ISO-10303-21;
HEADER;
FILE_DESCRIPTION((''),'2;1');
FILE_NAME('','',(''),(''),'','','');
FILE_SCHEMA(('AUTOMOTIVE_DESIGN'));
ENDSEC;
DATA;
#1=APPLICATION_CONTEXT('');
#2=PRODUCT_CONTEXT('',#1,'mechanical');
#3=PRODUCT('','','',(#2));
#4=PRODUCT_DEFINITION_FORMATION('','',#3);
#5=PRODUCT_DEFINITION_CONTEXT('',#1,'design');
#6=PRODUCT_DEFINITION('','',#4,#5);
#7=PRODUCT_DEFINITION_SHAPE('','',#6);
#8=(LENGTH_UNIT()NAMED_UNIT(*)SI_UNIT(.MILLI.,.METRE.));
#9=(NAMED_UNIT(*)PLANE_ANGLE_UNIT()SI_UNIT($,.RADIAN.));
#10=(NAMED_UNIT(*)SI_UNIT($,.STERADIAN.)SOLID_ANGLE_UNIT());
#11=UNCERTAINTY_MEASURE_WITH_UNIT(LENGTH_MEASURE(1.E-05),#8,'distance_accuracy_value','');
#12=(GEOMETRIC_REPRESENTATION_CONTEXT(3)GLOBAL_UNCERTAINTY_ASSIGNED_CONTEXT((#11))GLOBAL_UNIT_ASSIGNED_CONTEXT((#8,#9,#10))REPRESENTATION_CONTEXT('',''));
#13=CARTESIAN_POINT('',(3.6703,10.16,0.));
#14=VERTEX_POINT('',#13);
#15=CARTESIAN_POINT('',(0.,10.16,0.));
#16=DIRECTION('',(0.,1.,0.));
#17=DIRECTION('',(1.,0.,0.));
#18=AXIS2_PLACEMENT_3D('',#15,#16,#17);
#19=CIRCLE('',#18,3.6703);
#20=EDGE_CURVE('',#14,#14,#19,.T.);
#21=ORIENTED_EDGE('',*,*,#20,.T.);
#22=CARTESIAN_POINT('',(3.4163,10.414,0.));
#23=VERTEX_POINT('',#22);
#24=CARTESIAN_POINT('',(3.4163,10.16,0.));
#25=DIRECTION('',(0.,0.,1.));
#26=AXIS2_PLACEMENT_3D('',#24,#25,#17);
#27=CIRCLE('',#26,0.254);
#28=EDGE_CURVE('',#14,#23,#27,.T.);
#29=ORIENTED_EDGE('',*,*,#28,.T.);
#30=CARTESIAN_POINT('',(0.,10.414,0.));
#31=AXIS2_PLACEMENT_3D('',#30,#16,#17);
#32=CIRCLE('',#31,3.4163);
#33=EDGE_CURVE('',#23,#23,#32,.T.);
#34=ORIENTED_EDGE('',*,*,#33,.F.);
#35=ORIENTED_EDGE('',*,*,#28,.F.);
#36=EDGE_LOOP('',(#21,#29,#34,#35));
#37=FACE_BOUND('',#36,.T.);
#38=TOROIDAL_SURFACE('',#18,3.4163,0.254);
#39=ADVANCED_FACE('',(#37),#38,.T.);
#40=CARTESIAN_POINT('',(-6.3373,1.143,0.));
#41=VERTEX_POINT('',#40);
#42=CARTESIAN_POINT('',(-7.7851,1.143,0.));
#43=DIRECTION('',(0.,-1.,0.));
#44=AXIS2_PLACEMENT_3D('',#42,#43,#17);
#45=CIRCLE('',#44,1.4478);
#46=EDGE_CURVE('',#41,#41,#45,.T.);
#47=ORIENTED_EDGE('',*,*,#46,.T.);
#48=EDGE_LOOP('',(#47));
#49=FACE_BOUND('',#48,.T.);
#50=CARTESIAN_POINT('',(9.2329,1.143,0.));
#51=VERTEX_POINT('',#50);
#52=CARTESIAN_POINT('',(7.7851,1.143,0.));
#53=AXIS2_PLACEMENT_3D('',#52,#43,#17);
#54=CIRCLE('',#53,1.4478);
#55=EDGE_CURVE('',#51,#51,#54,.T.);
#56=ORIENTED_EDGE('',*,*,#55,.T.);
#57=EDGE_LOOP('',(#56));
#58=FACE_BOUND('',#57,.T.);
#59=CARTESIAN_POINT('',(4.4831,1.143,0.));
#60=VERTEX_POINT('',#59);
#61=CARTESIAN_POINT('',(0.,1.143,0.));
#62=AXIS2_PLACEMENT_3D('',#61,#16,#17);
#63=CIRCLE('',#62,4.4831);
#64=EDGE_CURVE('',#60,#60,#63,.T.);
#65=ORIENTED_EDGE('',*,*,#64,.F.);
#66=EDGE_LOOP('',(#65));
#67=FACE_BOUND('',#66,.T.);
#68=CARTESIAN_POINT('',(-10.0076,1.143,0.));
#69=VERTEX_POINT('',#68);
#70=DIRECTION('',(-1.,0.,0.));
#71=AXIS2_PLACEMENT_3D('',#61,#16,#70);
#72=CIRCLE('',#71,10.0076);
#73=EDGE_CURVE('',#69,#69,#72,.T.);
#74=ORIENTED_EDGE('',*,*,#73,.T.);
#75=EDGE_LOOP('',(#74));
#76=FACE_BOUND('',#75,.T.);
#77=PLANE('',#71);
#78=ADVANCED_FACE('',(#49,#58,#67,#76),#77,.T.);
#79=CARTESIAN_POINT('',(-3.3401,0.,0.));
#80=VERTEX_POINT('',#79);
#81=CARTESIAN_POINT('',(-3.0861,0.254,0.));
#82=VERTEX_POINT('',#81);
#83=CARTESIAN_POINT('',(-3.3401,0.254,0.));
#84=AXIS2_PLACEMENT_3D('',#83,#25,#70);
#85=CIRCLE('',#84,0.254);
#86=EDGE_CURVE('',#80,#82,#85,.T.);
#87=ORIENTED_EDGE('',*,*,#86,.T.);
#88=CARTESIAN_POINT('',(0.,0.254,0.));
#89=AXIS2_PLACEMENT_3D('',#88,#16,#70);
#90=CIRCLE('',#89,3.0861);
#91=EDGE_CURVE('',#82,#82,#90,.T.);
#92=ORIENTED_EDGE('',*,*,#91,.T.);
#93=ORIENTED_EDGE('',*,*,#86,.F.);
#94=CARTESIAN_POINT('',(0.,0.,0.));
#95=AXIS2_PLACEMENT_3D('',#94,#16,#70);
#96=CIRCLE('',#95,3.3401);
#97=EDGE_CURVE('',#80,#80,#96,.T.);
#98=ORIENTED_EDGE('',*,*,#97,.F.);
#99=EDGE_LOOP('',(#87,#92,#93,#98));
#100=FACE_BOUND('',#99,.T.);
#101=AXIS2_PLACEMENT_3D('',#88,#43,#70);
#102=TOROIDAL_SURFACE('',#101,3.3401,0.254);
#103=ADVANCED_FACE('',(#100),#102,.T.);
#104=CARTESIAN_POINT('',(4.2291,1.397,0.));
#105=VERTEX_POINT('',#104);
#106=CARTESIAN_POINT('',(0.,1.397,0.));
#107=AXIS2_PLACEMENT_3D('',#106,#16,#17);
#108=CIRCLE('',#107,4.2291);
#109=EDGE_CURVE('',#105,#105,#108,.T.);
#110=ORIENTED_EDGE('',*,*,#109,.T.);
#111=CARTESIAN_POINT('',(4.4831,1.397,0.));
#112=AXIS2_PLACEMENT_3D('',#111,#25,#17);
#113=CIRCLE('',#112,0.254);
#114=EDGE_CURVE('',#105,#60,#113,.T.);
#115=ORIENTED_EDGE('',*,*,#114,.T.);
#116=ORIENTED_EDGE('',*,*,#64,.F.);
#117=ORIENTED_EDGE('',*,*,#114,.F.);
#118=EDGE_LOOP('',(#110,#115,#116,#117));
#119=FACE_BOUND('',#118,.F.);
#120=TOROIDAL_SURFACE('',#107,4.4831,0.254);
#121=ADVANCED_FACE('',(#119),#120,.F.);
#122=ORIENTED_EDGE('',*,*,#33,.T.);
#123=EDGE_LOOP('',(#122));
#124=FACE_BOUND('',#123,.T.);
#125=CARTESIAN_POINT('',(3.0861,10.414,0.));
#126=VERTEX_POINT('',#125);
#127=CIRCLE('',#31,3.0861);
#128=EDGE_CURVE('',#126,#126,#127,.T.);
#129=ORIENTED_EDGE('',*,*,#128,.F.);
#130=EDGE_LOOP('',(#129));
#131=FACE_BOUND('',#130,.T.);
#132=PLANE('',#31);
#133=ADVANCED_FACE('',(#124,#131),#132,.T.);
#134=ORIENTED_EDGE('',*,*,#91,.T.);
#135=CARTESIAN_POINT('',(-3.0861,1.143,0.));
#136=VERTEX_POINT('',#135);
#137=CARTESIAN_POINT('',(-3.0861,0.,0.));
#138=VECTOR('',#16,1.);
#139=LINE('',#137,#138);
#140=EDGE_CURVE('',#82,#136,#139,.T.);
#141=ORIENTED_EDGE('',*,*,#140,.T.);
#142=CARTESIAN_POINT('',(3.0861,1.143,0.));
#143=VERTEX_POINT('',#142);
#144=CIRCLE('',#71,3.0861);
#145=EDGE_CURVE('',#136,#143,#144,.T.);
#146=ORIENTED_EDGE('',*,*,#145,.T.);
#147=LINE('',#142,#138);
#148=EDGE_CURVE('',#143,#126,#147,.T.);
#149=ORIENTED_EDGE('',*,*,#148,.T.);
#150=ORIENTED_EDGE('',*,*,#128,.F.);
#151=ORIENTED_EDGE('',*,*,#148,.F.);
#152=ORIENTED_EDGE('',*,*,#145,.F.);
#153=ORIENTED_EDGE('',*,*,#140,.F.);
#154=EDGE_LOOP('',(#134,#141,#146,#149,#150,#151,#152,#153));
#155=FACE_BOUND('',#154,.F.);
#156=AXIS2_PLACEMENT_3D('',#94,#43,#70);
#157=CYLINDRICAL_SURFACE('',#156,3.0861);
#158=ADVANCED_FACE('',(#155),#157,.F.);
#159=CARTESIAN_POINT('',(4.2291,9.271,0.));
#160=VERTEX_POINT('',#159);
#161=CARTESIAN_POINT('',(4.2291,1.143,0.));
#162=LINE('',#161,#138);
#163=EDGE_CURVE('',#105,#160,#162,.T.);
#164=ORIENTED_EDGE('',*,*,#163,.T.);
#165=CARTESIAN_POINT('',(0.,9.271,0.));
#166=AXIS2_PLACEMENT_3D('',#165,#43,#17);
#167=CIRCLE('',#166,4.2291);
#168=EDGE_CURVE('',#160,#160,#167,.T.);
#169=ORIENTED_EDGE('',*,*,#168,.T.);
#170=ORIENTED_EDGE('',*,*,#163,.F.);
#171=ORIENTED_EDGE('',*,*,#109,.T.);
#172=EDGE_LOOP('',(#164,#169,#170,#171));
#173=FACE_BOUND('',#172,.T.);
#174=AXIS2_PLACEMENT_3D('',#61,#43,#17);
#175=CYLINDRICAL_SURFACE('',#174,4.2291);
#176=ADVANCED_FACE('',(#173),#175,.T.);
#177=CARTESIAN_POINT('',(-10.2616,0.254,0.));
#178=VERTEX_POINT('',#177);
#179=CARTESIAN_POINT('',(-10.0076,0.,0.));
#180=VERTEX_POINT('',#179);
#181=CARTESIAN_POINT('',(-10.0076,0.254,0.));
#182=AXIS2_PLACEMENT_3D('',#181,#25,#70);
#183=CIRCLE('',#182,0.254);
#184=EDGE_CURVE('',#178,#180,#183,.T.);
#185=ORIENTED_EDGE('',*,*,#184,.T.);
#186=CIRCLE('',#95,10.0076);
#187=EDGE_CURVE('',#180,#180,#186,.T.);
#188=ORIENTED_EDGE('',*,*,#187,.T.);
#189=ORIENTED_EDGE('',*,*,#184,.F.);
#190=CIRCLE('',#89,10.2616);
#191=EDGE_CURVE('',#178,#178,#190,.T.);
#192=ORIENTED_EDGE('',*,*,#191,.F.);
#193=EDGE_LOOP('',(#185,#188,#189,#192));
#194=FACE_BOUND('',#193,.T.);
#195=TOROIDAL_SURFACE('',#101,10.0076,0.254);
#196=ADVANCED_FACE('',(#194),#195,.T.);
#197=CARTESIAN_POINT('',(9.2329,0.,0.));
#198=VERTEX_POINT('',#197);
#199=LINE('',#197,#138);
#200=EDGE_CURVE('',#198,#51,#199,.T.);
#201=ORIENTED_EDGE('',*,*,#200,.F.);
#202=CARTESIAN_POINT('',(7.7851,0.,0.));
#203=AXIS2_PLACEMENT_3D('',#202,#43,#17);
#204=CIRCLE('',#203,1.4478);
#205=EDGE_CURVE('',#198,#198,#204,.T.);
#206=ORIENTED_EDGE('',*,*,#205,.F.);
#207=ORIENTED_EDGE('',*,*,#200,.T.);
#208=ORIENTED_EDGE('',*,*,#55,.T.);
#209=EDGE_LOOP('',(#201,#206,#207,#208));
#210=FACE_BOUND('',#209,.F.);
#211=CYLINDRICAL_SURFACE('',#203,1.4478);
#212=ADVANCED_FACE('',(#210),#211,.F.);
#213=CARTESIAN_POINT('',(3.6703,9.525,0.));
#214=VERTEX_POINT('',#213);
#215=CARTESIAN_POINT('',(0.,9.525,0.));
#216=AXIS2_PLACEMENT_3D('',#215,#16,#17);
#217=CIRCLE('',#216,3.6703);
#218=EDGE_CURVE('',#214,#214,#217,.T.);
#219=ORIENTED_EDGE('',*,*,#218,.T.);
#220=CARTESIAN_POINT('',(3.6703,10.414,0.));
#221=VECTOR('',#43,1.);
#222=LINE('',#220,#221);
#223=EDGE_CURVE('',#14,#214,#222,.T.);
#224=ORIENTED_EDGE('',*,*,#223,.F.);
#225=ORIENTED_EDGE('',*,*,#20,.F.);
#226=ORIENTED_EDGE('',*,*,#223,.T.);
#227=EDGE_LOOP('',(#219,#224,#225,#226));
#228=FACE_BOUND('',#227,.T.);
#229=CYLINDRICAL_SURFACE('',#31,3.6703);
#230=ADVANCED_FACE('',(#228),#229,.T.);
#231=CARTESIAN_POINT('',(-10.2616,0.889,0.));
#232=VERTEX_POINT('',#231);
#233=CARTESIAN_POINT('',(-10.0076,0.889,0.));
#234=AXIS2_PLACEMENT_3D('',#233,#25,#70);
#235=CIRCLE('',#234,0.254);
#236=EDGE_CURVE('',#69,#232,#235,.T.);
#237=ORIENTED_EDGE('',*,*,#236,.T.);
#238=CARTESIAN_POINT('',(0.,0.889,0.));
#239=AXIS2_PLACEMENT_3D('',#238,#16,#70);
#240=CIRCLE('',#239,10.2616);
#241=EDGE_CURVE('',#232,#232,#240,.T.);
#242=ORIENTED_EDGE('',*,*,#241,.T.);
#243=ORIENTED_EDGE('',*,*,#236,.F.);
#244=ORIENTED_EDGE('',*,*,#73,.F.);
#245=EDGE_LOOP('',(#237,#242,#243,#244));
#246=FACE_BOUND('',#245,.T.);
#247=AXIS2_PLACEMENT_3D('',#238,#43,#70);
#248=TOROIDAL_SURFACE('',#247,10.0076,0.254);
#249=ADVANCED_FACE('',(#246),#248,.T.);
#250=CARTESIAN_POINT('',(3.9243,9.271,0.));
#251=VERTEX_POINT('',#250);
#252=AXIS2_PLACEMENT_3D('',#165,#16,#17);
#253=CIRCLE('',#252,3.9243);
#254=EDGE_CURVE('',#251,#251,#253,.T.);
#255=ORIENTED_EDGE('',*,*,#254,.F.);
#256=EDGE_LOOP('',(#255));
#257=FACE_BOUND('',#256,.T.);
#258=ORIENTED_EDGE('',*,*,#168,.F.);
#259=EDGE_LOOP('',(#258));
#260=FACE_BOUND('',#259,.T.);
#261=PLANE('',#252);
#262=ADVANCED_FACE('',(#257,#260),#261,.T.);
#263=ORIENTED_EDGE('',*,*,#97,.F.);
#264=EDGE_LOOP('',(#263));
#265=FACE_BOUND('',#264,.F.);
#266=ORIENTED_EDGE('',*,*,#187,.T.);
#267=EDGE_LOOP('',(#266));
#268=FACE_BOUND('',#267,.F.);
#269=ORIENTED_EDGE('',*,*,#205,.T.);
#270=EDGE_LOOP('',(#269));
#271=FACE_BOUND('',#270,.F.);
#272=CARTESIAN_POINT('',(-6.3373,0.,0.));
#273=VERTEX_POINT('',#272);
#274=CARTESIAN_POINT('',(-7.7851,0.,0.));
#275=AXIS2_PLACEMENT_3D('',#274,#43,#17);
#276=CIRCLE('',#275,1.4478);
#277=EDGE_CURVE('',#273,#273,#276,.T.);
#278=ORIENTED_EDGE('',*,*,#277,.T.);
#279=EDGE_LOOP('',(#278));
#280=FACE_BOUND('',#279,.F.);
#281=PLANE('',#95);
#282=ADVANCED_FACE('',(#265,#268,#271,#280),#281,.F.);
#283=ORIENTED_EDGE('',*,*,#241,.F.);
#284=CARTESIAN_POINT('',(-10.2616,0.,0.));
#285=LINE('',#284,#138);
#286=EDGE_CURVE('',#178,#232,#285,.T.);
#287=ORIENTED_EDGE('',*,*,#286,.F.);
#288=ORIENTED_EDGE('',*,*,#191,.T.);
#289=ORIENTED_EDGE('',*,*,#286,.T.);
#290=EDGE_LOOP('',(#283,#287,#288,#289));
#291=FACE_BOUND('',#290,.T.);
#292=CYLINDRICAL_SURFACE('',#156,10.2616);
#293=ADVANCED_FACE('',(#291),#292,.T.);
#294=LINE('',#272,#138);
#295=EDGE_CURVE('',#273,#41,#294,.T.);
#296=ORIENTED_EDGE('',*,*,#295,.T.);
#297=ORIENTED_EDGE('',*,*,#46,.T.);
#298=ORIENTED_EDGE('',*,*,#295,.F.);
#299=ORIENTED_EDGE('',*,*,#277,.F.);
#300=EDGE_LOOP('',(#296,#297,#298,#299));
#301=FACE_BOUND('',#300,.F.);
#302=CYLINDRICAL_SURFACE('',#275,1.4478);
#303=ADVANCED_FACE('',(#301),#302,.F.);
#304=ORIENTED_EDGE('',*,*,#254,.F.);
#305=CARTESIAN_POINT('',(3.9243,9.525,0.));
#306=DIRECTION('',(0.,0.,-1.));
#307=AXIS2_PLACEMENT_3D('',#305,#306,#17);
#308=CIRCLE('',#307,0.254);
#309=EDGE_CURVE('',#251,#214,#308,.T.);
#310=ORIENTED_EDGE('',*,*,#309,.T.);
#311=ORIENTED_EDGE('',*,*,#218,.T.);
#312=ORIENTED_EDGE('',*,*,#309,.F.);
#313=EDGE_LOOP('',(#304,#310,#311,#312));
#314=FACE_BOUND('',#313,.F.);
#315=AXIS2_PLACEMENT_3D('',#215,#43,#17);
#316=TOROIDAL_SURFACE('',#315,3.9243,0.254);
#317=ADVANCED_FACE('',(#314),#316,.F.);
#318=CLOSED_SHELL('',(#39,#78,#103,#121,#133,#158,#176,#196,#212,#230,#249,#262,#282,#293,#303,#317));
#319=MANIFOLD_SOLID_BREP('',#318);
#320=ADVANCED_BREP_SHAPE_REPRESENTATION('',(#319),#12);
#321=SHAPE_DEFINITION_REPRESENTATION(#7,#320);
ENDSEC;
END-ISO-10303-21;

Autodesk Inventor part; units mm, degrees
ref_plane "YZ Plane" through (0, 0, 0) normal (1, 0, 0) x (0, 1, 0)
ref_plane "XZ Plane" through (0, 0, 0) normal (0, 1, 0) x (-1, 0, 0)
ref_plane "XY Plane" through (0, 0, 0) normal (0, 0, 1) x (1, 0, 0)
sketch "Sketch1" plane through (0, 0, 0) normal (0, 1, 0) x (-1, 0, 0)
  circle A0 centre (0, 0) radius 10.2616
  circle A1 centre (0, 0) radius 3.0861
  dimension "d0" = 20.5232
  dimension "d1" = 6.1722
extrude "Extrusion1" add sketch "Sketch1" along normal blind 1.143
sketch "Sketch3" plane through (0, 0, 0) normal (0, -1, 0) x (1, 0, 0)
  circle A0 centre (0, 0) radius 10.2616 construction
  line L0 (-10.2616, 0) -> (10.2616, 0) construction
  circle A1 centre (-7.7851, 0) radius 1.4478
  circle A2 centre (7.7851, 0) radius 1.4478
  dimension "d7" = 7.7851
  dimension "d8" = 2.8956
  dimension "d11" = 360
extrude "Extrusion3" cut sketch "Sketch3" against normal through all
sketch "Sketch2" plane through (0, 1.143, 0) normal (0, 1, 0) x (1, 0, 0)
  circle A0 centre (0, 0) radius 3.0861
  circle A1 centre (0, 0) radius 4.2291
  dimension "d4" = 8.4582
extrude "Extrusion2" add sketch "Sketch2" along normal blind 9.271
sketch "Sketch4" plane through (0, 10.414, 0) normal (0, 1, 0) x (1, 0, 0)
  circle A0 centre (0, 0) radius 4.3162
  circle A1 centre (0, 0) radius 3.6703
  dimension "d15" = 7.3406
extrude "Extrusion4" cut sketch "Sketch4" against normal blind 1.143
fillet "Fillet1" radius 0.254 6 edges at (10.2616, 0, 0) (3.0861, 0, 0) (10.2616, 1.143, 0) (-3.6703, 10.414, 0) (-3.6703, 9.271, 0) (-4.2291, 1.143, 0)
properties part number "Steele Sewing Machine Bobbin Base" material "ABS Plastic"
